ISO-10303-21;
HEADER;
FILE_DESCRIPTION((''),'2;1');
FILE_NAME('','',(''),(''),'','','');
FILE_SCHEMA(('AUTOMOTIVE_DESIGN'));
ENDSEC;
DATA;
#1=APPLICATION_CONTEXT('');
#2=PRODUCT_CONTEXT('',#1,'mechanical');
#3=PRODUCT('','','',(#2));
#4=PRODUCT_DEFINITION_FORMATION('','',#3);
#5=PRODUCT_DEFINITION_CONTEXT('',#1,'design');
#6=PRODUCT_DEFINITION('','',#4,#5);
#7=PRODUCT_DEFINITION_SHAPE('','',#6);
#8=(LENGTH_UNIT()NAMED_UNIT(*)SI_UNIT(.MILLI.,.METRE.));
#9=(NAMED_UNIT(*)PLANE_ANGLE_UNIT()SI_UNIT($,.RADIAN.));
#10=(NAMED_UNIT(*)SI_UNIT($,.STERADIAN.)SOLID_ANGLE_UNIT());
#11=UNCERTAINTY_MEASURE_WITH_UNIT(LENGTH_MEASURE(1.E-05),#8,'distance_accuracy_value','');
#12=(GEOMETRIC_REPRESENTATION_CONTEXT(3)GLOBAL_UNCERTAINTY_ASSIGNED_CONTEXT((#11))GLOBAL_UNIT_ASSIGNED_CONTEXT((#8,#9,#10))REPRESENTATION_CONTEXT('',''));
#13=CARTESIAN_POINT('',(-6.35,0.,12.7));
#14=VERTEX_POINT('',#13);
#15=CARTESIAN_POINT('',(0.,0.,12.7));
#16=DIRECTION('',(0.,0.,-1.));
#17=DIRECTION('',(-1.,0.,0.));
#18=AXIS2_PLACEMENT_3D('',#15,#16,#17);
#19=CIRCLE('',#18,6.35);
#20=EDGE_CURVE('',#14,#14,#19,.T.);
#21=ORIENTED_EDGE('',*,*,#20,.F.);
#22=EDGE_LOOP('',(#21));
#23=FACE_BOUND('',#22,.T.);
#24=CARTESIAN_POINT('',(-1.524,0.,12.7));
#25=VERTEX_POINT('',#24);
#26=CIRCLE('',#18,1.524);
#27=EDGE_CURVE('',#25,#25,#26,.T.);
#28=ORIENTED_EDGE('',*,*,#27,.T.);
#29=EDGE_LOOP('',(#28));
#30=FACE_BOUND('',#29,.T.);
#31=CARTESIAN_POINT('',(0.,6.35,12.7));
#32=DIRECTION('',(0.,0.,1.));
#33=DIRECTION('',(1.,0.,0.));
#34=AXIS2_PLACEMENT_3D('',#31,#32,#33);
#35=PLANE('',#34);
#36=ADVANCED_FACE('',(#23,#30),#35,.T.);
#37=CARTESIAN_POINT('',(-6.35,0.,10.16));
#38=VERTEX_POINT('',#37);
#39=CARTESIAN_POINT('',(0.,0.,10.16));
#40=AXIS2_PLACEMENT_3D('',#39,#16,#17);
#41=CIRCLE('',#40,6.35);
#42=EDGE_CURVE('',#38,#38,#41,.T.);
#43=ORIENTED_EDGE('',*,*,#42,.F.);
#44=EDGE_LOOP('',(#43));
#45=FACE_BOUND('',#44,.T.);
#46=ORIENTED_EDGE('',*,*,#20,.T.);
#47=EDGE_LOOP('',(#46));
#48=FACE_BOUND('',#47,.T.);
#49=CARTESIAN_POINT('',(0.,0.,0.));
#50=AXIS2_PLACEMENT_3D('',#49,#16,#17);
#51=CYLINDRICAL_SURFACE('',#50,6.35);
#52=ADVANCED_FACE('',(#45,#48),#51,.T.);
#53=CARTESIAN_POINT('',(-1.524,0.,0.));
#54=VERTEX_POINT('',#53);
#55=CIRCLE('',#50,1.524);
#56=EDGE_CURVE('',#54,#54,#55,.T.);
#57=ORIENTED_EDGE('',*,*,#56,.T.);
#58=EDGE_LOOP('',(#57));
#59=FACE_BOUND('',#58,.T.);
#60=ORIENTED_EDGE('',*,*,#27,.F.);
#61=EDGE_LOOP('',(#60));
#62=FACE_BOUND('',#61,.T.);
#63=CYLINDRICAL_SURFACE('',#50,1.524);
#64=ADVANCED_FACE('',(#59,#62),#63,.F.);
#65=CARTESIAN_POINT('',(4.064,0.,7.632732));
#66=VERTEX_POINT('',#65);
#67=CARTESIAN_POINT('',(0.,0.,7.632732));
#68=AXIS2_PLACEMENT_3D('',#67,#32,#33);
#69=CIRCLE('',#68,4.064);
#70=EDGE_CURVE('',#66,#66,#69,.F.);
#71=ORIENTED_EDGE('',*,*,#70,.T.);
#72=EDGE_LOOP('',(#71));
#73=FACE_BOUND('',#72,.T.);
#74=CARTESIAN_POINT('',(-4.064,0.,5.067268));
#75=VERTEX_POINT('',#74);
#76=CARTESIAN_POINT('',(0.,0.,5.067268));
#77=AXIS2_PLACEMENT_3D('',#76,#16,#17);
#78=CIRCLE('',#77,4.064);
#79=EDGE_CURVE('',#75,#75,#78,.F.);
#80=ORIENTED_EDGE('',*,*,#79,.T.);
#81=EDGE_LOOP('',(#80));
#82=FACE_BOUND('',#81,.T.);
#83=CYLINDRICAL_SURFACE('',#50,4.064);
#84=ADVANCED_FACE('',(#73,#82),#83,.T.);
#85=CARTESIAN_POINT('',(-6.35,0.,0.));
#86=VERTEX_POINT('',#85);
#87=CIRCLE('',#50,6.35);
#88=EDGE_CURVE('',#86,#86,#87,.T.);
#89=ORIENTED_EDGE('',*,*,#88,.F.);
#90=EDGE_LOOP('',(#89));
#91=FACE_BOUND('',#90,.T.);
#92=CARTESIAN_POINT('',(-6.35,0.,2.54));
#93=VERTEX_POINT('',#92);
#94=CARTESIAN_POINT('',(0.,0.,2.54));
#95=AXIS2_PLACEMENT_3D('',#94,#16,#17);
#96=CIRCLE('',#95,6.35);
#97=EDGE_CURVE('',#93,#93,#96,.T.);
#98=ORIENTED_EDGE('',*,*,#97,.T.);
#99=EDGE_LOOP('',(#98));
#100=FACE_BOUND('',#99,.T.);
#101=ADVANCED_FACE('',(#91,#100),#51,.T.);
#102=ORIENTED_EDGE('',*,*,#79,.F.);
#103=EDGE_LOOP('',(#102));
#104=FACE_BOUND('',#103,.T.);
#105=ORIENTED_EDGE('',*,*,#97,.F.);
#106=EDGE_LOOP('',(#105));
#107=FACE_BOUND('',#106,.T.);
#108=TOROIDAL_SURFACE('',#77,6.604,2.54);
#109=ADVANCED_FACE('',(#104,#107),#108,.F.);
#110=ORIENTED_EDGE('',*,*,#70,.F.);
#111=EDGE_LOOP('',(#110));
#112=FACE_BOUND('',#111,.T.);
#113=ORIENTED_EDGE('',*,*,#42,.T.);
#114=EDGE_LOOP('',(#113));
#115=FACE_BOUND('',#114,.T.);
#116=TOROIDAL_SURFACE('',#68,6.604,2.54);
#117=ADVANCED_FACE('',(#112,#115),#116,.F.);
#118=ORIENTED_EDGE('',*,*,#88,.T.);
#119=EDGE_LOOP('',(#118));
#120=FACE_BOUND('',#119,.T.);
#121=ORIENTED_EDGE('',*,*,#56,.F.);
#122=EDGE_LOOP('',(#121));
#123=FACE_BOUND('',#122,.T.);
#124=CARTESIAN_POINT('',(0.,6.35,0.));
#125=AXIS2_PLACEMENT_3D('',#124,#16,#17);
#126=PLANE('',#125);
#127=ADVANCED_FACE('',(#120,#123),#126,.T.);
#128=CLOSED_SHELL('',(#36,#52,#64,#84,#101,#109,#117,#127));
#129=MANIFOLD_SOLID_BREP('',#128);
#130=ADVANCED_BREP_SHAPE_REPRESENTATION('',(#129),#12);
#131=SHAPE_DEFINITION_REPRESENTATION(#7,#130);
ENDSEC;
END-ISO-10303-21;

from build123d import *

# Parameters (mm, degrees)
FILLET1_R = 2.54


with BuildPart() as part:
    # Sketch2 → Revolve1 (revolve)
    with BuildSketch(Plane.YZ, mode=Mode.PRIVATE) as revolve1_sk:
        Polygon((6.35, 0), (1.524, 0), (1.524, 12.7), (6.35, 12.7), (6.35, 10.16), (4.064, 10.16), (4.064, 2.54), (6.35, 2.54), align=None)
    revolve(revolve1_sk.sketch.rotate(Axis((0, 0, 0), (0, 0, 1)), 90), axis=Axis((0, 0, 0), (0, 0, 1)))

    # Fillet1
    # the kernel refuses this fillet: 2.54 mm, written as the material it adds along each edge
    with BuildSketch(Plane(origin=(0, 0, 10.16), x_dir=(-1, 0, 0), z_dir=(0, 1, 0))) as fillet1_piece_1:
        with BuildLine():
            CenterArc((6.604, -2.52726809), FILLET1_R, 95.739170477, 84.260829523)
            Line((4.064, -2.52726809), (4.0132, -2.52726809))
            Line((4.0132, -2.52726809), (4.0132, 0))
            Line((4.0132, 0), (4.064, 0.0508))
            ThreePointArc((4.064, 0.0508), (5.207, 0.0508), (6.34492, 0.050545362))
            Line((6.34492, 0.050545362), (6.35, 0))
        make_face()
    revolve(axis=Axis((0, 0, 10.16), (0, 0, 1)))
    with BuildSketch(Plane(origin=(0, 0, 2.54), x_dir=(-1, 0, 0), z_dir=(0, 1, 0))) as fillet1_piece_2:
        with BuildLine():
            CenterArc((6.604, 2.52726809), FILLET1_R, 180, 84.260829523)
            Line((6.35, 0), (6.34492, -0.050545362))
            ThreePointArc((6.34492, -0.050545362), (5.207, -0.0508), (4.064, -0.0508))
            Line((4.064, -0.0508), (4.0132, 0))
            Line((4.0132, 0), (4.0132, 2.52726809))
            Line((4.0132, 2.52726809), (4.064, 2.52726809))
        make_face()
    revolve(axis=Axis((0, 0, 2.54), (0, 0, 1)))


solid = part.part
